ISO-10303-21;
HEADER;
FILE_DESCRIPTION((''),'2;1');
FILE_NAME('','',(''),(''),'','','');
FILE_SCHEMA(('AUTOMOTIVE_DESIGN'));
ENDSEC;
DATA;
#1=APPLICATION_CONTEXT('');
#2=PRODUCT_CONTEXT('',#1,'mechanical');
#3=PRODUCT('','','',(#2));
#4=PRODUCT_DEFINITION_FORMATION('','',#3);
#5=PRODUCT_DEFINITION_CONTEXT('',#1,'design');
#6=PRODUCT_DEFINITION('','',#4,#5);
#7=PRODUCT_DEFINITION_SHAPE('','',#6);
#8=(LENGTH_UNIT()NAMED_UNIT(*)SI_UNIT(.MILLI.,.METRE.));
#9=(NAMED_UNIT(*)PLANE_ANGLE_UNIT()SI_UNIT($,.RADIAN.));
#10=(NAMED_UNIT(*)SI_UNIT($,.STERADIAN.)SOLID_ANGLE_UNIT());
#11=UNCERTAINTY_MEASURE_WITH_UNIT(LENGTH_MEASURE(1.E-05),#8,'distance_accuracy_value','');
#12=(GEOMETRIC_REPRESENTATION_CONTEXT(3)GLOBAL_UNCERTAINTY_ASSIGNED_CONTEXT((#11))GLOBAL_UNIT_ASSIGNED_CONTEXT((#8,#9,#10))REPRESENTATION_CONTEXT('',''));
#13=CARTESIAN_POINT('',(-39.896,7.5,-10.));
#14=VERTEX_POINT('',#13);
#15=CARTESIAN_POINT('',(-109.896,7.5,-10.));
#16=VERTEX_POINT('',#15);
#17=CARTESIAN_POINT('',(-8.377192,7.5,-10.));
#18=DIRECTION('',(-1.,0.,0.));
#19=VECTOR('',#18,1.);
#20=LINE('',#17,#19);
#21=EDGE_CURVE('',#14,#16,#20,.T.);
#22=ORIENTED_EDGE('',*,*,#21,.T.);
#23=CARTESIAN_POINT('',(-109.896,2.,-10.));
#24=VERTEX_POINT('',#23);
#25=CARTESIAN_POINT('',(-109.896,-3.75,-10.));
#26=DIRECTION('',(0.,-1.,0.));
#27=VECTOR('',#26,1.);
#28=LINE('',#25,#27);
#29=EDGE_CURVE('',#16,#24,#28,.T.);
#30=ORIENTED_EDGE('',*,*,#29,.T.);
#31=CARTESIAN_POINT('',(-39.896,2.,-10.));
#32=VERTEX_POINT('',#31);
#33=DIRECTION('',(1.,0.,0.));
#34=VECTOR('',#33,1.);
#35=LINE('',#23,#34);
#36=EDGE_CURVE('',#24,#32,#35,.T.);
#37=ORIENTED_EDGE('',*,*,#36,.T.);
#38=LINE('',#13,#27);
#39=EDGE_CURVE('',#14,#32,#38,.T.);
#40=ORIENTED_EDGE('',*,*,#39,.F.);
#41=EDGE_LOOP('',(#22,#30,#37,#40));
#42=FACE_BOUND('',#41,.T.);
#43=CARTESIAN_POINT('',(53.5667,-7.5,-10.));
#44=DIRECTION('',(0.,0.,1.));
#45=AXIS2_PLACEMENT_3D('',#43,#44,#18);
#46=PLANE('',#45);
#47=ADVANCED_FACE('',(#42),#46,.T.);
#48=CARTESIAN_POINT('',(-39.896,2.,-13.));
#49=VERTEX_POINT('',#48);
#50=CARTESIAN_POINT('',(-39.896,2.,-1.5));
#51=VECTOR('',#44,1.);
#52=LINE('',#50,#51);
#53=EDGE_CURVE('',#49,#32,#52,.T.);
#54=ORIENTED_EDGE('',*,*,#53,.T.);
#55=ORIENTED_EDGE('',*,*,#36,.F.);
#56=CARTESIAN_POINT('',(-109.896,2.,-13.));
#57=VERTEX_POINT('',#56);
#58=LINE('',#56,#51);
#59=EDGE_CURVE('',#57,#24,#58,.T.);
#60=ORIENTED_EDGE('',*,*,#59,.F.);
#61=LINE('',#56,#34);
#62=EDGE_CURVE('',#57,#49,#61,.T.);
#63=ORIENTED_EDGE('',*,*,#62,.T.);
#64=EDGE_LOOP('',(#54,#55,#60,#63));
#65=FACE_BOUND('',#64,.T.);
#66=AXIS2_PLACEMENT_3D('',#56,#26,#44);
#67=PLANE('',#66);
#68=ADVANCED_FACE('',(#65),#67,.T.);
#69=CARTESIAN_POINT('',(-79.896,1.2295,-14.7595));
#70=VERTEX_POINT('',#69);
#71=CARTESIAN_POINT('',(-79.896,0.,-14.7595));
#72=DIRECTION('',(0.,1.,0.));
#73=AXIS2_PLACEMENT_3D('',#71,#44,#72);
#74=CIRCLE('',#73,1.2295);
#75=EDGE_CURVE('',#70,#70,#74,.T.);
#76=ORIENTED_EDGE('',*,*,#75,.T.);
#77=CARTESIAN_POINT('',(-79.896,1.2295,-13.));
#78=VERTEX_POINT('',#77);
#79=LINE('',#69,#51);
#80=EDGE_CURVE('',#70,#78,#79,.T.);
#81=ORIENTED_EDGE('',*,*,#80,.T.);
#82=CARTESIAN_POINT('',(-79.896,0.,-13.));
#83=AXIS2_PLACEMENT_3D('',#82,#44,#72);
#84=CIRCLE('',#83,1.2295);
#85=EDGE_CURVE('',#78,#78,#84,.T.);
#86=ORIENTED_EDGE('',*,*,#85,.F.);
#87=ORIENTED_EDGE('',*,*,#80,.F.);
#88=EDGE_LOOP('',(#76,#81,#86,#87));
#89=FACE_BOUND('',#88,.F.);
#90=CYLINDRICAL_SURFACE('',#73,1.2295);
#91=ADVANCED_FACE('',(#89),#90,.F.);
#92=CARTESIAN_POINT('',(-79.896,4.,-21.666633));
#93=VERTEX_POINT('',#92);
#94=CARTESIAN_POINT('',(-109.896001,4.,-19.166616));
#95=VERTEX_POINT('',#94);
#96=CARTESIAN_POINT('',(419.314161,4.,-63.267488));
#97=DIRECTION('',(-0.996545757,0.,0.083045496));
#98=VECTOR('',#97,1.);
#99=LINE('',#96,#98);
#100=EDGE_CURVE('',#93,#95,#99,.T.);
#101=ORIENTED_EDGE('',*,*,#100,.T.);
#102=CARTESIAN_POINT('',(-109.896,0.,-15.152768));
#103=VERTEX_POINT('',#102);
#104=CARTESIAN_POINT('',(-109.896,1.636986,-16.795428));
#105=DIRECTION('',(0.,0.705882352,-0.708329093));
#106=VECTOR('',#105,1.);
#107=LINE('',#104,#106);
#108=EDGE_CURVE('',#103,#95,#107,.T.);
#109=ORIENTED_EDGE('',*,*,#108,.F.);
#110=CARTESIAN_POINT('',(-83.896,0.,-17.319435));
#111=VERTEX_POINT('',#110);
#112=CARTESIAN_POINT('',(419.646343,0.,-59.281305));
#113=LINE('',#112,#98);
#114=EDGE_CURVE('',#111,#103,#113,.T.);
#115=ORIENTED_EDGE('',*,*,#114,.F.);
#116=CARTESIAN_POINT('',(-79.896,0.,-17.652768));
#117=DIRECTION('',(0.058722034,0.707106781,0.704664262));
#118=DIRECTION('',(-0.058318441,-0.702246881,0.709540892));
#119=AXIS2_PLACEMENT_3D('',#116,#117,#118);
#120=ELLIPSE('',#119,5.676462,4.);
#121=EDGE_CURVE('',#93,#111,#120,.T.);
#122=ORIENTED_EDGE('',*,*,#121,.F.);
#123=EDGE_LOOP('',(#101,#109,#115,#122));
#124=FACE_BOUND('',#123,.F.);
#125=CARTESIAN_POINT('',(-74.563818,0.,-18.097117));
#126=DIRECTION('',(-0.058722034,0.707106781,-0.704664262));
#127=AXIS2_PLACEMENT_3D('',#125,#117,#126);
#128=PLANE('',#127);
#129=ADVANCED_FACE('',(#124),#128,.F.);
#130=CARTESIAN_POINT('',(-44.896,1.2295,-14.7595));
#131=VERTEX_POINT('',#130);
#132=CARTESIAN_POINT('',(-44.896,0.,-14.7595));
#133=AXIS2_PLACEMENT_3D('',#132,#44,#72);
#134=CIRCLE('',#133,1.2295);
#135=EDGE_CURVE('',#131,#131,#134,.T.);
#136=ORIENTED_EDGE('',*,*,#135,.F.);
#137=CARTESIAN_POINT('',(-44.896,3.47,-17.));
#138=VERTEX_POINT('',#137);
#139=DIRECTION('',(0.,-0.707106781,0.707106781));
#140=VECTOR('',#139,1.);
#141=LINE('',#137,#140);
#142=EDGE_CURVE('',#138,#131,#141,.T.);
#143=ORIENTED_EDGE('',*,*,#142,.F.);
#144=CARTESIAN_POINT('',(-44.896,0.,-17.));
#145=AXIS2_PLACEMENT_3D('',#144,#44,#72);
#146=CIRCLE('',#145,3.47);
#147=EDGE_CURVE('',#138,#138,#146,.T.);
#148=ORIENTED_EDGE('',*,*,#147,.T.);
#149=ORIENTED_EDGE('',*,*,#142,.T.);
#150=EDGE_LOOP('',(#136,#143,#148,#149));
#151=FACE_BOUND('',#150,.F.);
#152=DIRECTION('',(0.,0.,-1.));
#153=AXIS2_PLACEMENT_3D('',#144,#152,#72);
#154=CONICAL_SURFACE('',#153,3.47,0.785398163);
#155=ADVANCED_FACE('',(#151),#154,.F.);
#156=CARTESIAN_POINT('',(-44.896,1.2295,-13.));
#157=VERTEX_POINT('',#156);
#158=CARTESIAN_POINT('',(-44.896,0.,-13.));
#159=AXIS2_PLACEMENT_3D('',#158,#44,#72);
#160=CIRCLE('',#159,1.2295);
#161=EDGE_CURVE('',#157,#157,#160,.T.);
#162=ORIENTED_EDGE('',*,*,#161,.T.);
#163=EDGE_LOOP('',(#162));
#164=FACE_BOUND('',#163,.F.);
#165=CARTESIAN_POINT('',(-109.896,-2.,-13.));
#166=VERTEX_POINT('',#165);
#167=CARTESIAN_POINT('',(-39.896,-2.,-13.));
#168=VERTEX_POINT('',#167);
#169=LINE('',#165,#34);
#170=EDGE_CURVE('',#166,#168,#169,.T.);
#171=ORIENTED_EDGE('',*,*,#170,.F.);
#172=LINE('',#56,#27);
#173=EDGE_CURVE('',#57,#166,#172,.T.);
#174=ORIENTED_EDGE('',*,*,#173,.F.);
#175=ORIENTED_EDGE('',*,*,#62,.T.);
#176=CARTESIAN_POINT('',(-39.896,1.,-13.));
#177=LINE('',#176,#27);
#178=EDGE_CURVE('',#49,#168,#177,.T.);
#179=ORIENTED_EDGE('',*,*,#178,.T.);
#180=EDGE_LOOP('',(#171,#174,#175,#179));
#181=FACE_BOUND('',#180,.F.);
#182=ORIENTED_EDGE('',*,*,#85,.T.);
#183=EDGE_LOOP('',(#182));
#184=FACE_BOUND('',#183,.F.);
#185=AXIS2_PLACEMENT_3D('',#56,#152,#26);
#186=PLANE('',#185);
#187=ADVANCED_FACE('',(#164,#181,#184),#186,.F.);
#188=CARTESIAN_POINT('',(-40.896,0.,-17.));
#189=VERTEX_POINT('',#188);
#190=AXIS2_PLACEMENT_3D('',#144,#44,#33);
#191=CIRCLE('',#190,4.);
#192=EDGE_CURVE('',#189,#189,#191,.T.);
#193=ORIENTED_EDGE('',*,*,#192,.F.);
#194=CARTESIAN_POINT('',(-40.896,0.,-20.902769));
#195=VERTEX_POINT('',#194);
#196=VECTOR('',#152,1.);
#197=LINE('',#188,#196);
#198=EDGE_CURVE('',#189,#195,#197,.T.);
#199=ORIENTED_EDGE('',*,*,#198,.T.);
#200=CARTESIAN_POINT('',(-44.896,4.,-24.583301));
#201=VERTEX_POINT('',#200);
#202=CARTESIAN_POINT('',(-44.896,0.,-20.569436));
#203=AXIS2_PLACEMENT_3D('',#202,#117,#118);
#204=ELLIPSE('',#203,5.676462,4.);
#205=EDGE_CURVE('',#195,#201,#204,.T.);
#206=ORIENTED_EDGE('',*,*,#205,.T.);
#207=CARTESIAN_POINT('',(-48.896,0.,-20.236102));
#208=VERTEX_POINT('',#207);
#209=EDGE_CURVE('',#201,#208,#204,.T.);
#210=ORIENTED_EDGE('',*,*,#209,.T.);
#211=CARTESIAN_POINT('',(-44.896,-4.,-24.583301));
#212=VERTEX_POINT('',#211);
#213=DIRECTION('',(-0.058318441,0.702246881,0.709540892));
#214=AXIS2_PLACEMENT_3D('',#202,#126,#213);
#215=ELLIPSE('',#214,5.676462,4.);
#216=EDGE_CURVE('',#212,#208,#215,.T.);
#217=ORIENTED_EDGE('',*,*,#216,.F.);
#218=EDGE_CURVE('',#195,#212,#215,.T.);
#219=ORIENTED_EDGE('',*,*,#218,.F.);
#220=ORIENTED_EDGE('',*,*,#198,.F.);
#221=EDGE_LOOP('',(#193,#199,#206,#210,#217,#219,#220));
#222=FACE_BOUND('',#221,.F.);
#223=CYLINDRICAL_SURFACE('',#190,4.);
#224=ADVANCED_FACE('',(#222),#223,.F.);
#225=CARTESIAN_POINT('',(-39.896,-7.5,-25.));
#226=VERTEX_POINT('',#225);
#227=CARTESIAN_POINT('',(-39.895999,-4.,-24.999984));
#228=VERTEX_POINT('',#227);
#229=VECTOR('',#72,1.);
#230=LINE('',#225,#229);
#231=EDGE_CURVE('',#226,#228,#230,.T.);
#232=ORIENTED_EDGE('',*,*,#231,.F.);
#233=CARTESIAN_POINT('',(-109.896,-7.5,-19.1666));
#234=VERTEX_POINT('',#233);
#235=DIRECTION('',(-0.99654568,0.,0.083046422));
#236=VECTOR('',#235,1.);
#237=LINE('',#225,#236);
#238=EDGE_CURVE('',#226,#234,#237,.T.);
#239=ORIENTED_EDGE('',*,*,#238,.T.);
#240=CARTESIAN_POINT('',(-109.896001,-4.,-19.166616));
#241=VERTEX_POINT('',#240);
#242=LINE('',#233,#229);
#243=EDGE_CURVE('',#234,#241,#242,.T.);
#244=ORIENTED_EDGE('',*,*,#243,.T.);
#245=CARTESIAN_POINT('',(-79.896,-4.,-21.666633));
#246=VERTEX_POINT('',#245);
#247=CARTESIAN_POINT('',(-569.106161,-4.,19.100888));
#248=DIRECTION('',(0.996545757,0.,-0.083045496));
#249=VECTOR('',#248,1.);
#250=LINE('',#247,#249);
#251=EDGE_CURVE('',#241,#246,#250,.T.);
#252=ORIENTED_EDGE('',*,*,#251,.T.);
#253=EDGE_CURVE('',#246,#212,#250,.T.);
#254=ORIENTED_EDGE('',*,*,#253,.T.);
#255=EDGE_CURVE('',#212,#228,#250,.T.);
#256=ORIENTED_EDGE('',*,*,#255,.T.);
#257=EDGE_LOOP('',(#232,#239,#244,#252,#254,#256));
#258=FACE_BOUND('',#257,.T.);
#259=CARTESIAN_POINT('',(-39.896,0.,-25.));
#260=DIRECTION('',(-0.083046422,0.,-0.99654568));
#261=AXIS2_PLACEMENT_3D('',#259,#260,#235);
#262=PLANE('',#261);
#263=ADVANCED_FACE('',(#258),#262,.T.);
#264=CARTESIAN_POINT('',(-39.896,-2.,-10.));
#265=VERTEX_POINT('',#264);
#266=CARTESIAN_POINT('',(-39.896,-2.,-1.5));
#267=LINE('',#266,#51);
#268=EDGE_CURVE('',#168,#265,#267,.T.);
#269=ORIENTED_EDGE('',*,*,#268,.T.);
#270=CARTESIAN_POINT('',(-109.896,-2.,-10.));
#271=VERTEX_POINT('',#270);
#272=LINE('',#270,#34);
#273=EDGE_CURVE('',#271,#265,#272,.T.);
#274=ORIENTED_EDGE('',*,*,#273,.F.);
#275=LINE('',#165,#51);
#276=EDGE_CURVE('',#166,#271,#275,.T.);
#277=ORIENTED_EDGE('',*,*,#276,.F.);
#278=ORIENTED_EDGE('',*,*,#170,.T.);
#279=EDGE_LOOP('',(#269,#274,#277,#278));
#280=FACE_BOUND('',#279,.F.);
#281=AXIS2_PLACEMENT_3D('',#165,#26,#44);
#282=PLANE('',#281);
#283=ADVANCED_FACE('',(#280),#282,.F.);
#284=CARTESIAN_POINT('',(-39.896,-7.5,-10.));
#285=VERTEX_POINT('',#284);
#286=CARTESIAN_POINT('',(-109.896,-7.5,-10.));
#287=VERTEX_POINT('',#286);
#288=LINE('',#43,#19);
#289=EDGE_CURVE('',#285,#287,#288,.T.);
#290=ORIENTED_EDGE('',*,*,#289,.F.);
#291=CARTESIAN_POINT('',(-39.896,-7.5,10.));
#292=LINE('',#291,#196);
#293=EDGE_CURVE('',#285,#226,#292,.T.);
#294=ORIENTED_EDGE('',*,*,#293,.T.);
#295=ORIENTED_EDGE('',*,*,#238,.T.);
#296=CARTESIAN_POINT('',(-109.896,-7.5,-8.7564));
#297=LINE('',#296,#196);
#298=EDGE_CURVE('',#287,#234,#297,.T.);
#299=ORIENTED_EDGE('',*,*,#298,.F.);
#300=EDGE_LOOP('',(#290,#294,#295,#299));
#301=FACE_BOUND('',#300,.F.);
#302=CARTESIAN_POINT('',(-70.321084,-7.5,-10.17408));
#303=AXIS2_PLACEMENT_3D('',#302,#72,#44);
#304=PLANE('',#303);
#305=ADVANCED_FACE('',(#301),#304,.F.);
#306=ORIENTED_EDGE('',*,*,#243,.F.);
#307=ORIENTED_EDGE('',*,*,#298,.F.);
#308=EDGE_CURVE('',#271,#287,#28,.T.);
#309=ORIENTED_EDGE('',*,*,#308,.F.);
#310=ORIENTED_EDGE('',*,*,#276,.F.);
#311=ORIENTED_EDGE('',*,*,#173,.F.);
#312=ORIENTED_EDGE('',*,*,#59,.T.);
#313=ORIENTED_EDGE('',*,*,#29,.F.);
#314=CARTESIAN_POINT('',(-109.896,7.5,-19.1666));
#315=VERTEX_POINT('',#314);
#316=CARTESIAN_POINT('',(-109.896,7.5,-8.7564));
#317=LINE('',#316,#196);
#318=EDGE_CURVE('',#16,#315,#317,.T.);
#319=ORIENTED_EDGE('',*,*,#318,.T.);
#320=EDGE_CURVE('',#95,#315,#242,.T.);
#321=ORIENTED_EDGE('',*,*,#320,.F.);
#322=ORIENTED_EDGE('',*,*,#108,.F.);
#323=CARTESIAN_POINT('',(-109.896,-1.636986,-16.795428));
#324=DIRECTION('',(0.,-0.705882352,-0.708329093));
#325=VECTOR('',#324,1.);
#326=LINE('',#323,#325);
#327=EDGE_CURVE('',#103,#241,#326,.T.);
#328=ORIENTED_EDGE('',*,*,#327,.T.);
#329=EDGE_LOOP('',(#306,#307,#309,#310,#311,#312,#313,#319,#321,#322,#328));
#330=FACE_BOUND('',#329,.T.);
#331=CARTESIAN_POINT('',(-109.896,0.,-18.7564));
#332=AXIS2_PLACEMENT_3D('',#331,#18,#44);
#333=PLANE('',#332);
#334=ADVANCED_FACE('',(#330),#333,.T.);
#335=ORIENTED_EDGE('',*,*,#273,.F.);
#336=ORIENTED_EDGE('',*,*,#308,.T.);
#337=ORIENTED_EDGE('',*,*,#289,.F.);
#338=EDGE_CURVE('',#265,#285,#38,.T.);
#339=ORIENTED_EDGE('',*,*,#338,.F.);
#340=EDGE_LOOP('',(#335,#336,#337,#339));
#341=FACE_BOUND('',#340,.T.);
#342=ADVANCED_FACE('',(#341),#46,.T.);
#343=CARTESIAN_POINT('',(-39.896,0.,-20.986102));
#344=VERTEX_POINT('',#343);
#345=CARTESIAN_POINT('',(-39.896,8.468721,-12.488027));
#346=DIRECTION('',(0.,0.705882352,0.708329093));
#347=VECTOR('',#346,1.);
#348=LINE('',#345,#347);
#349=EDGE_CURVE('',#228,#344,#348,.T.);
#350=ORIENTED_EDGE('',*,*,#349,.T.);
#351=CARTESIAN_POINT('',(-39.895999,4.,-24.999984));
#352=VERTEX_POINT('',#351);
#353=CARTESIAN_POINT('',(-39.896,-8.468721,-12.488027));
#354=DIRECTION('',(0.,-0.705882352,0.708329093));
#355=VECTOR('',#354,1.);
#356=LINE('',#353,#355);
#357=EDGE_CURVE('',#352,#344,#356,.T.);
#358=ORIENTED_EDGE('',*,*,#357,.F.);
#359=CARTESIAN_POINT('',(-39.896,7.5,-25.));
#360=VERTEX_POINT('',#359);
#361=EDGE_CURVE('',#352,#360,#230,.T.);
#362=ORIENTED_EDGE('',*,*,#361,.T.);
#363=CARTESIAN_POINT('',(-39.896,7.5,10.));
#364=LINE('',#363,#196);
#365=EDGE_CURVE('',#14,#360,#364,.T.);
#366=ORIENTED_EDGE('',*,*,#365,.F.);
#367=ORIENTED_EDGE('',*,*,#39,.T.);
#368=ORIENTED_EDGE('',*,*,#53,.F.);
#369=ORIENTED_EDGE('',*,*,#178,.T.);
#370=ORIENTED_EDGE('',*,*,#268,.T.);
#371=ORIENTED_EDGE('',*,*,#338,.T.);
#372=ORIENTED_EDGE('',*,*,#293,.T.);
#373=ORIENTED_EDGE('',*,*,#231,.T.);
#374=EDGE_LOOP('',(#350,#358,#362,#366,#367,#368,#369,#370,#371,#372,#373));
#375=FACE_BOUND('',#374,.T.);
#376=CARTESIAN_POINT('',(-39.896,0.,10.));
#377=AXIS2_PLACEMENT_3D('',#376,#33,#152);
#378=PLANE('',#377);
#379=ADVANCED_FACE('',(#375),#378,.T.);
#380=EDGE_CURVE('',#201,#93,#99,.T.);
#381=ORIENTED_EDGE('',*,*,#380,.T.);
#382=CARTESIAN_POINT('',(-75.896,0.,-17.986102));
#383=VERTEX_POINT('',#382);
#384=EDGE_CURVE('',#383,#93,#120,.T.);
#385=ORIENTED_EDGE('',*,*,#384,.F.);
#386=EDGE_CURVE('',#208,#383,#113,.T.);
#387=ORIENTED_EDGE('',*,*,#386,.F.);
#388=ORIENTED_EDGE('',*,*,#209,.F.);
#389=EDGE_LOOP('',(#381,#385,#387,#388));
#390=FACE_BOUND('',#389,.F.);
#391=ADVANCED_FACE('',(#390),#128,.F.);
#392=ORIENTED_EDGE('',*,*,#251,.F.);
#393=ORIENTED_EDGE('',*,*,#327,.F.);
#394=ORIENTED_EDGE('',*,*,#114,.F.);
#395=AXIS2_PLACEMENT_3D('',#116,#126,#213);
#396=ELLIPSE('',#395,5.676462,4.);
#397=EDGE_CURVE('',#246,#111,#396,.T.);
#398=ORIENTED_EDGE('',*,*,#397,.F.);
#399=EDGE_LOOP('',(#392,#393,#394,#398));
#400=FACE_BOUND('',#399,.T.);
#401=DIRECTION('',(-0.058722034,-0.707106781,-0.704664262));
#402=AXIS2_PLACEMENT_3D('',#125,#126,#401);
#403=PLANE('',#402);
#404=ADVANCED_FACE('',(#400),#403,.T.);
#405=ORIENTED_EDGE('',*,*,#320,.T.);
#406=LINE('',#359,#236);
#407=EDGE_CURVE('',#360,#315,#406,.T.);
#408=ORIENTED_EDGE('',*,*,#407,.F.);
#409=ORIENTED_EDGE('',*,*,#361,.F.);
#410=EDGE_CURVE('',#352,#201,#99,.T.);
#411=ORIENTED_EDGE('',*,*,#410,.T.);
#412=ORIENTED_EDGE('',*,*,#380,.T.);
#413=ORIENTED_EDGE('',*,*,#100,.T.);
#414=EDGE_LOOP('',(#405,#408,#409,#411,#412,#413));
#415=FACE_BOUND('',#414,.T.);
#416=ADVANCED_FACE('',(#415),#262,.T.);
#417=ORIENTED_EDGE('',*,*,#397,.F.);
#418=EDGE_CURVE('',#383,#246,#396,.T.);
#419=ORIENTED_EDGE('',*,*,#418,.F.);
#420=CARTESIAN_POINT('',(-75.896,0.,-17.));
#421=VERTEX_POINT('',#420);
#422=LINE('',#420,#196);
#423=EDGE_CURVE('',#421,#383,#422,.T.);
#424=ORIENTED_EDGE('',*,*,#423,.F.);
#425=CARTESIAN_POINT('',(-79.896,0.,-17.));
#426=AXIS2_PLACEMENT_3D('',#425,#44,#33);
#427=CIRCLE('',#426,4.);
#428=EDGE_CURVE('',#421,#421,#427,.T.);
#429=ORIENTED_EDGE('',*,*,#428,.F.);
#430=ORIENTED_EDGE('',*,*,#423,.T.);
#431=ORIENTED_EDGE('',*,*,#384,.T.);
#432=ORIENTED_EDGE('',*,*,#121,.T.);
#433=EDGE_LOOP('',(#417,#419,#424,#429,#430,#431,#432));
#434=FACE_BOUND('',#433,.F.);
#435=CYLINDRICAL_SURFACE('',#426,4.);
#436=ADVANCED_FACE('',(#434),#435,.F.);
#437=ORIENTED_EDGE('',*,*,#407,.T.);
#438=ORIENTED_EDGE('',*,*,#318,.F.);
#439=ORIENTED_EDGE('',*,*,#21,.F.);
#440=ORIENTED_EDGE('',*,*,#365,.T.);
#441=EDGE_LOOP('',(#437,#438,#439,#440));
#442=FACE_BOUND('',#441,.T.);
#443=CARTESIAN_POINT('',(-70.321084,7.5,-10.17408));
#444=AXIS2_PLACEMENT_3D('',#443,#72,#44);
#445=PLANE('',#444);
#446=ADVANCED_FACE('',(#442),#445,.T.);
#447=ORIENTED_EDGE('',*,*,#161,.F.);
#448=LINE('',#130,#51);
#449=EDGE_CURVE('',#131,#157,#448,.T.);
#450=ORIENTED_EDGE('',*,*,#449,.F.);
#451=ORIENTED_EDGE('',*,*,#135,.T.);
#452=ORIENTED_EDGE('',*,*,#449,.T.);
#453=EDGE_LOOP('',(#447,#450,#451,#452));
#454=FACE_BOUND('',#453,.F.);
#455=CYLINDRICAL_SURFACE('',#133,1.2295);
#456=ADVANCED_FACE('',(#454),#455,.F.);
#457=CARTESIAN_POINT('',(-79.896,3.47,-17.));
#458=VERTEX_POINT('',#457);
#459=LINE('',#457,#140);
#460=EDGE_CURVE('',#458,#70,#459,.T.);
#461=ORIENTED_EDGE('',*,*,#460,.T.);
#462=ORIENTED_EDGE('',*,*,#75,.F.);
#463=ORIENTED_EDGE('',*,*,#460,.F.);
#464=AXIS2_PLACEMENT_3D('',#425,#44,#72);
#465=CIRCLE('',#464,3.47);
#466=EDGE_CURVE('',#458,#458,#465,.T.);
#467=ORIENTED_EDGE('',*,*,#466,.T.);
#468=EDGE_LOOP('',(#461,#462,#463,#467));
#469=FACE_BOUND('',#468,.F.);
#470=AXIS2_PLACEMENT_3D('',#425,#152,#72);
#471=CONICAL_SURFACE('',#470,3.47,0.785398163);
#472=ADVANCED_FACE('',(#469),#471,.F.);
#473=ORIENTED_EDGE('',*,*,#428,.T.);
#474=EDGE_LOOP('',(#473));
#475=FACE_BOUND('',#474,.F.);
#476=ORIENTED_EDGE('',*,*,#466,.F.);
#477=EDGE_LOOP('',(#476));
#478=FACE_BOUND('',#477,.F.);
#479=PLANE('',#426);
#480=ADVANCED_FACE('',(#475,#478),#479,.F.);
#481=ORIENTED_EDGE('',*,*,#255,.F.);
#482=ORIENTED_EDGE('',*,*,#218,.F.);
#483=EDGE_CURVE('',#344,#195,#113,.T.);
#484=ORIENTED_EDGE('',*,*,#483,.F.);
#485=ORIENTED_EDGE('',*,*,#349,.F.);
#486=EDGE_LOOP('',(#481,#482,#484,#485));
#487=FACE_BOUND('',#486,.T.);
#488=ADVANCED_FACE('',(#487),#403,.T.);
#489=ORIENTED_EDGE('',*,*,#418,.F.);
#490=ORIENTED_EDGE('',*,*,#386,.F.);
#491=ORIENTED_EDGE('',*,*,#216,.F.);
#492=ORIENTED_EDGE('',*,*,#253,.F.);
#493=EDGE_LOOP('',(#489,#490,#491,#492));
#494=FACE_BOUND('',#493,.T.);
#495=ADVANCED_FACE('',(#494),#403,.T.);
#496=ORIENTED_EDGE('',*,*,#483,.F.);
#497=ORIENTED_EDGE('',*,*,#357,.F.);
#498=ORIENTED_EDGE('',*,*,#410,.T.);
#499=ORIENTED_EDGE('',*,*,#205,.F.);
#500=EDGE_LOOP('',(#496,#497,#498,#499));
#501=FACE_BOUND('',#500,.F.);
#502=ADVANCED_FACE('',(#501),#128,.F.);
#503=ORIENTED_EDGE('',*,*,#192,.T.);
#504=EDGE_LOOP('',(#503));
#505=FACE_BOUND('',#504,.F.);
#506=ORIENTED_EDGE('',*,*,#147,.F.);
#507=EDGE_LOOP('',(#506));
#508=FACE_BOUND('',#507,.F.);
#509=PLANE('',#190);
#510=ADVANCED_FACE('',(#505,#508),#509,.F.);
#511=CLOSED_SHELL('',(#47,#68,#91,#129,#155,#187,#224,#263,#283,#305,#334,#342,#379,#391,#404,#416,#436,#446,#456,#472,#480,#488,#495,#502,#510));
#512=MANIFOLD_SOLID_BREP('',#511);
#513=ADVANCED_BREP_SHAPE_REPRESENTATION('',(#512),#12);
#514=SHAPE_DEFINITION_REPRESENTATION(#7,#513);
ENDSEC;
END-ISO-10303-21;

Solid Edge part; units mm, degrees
sketch "Sketch1" plane through (0, 0, 0) normal (0, -1, 0) x (1, 0, 0)
  line L0 (-109.896, -8.7564) -> (-39.896, 10)
  line L1 (-39.896, 10) -> (30.104, 10)
  arc A0 (30.104, 10) -> (30.104, -10) centre (30.104, 0) cw
  line L2 (30.104, -10) -> (-39.896, -10)
  line L3 (-39.896, -10) -> (-39.896, -18.7564)
  line L4 (-39.896, -18.7564) -> (-109.896, -18.7564)
  line L5 (-109.896, -18.7564) -> (-109.896, -8.7564)
  circle A1 centre (30.104, 0) radius 5
  circle A2 centre (0, 0) radius 5
  dimension "D1" = 10
  dimension "D2" = 30.104
  dimension "D3" = 10
  dimension "D4" = 70
  dimension "D5" = 8.7564
  dimension "D6" = 10
  dimension "D7" = 70
extrude "Protrusion1" add sketch "Sketch1" along normal mid plane 4
sketch "Sketch2" plane through (-34.896, 0, -4.3782) normal (0, -1, 0) x (1, 0, 0)
  line L0 (-5, 14.3782) -> (-5, -20.6218)
  line L1 (-5, -20.6218) -> (-75, -14.7884)
  line L2 (-75, -4.3782) -> (-75, -14.7884)
  line L3 (-75, -4.3782) -> (-5, 14.3782)
  dimension "D1" = 35
extrude "Protrusion2" add sketch "Sketch2" along normal mid plane 15
sketch "Sketch3" plane through (-74.896, -7.5, -22.0833) normal (0.9965458, 0, -0.0830455) x (0, 1, 0)
  line L0 (7.5, 4) -> (3.5, 0)
  line L1 (3.5, 0) -> (11.5, 0)
  line L2 (7.5, 4) -> (11.5, 0)
  dimension "D1" = 4
extrude "Cutout1" cut sketch "Sketch3" along normal through all and the other way through all
sketch "Sketch4" plane through (-74.896, -7.5, -7.5) normal (0, -1, 0) x (0, 0, -1)
  line L0 (2.5, 128.4627) -> (2.5, -36.5848)
  line L1 (2.5, -36.5848) -> (-39.0806, -36.5848)
  line L2 (-39.0806, 128.4627) -> (-39.0806, -36.5848)
  line L3 (2.5, 128.4627) -> (-39.0806, 128.4627)
extrude "Cutout2" cut sketch "Sketch4" against normal up to next
sketch "Sketch5" plane through (-109.896, 0, -14.5833) normal (-1, 0, 0) x (0, 0, 1)
  line L0 (4.5833, -2) -> (4.5833, 2)
  line L1 (1.5833, 2) -> (4.5833, 2)
  line L2 (1.5833, 2) -> (1.5833, -2)
  line L3 (1.5833, -2) -> (4.5833, -2)
  dimension "D1" = 4
  dimension "D2" = 3
extrude "Cutout3" cut sketch "Sketch5" against normal up to next
sketch "Sketch6" plane through (-74.896, 0, -17) normal (0, 0, 1) x (1, 0, 0)
  circle A0 centre (30, 0) radius 4
  circle A1 centre (-5, 0) radius 4
  dimension "D1" = 8
  dimension "D2" = 35
  dimension "D3" = 5
  dimension "D4" = 8
extrude "VaciadoExtruido_6" cut sketch "Sketch6" against normal up to next
hole "Agujero_7" at (-79.896, 0, -17) direction (0, 0, 1) diameter 2.459 depth 7 tip angle 90 countersink diameter 6.94 countersink angle 90 thread major 3 thread length 5
hole "Hole1" at (-44.896, 0, -17) direction (0, 0, 1) diameter 2.459 depth 7 tip angle 90 countersink diameter 6.94 countersink angle 90 thread major 3 thread length 5
properties part number "1976-1500-006" material "Aluminio, 7075-T6"
